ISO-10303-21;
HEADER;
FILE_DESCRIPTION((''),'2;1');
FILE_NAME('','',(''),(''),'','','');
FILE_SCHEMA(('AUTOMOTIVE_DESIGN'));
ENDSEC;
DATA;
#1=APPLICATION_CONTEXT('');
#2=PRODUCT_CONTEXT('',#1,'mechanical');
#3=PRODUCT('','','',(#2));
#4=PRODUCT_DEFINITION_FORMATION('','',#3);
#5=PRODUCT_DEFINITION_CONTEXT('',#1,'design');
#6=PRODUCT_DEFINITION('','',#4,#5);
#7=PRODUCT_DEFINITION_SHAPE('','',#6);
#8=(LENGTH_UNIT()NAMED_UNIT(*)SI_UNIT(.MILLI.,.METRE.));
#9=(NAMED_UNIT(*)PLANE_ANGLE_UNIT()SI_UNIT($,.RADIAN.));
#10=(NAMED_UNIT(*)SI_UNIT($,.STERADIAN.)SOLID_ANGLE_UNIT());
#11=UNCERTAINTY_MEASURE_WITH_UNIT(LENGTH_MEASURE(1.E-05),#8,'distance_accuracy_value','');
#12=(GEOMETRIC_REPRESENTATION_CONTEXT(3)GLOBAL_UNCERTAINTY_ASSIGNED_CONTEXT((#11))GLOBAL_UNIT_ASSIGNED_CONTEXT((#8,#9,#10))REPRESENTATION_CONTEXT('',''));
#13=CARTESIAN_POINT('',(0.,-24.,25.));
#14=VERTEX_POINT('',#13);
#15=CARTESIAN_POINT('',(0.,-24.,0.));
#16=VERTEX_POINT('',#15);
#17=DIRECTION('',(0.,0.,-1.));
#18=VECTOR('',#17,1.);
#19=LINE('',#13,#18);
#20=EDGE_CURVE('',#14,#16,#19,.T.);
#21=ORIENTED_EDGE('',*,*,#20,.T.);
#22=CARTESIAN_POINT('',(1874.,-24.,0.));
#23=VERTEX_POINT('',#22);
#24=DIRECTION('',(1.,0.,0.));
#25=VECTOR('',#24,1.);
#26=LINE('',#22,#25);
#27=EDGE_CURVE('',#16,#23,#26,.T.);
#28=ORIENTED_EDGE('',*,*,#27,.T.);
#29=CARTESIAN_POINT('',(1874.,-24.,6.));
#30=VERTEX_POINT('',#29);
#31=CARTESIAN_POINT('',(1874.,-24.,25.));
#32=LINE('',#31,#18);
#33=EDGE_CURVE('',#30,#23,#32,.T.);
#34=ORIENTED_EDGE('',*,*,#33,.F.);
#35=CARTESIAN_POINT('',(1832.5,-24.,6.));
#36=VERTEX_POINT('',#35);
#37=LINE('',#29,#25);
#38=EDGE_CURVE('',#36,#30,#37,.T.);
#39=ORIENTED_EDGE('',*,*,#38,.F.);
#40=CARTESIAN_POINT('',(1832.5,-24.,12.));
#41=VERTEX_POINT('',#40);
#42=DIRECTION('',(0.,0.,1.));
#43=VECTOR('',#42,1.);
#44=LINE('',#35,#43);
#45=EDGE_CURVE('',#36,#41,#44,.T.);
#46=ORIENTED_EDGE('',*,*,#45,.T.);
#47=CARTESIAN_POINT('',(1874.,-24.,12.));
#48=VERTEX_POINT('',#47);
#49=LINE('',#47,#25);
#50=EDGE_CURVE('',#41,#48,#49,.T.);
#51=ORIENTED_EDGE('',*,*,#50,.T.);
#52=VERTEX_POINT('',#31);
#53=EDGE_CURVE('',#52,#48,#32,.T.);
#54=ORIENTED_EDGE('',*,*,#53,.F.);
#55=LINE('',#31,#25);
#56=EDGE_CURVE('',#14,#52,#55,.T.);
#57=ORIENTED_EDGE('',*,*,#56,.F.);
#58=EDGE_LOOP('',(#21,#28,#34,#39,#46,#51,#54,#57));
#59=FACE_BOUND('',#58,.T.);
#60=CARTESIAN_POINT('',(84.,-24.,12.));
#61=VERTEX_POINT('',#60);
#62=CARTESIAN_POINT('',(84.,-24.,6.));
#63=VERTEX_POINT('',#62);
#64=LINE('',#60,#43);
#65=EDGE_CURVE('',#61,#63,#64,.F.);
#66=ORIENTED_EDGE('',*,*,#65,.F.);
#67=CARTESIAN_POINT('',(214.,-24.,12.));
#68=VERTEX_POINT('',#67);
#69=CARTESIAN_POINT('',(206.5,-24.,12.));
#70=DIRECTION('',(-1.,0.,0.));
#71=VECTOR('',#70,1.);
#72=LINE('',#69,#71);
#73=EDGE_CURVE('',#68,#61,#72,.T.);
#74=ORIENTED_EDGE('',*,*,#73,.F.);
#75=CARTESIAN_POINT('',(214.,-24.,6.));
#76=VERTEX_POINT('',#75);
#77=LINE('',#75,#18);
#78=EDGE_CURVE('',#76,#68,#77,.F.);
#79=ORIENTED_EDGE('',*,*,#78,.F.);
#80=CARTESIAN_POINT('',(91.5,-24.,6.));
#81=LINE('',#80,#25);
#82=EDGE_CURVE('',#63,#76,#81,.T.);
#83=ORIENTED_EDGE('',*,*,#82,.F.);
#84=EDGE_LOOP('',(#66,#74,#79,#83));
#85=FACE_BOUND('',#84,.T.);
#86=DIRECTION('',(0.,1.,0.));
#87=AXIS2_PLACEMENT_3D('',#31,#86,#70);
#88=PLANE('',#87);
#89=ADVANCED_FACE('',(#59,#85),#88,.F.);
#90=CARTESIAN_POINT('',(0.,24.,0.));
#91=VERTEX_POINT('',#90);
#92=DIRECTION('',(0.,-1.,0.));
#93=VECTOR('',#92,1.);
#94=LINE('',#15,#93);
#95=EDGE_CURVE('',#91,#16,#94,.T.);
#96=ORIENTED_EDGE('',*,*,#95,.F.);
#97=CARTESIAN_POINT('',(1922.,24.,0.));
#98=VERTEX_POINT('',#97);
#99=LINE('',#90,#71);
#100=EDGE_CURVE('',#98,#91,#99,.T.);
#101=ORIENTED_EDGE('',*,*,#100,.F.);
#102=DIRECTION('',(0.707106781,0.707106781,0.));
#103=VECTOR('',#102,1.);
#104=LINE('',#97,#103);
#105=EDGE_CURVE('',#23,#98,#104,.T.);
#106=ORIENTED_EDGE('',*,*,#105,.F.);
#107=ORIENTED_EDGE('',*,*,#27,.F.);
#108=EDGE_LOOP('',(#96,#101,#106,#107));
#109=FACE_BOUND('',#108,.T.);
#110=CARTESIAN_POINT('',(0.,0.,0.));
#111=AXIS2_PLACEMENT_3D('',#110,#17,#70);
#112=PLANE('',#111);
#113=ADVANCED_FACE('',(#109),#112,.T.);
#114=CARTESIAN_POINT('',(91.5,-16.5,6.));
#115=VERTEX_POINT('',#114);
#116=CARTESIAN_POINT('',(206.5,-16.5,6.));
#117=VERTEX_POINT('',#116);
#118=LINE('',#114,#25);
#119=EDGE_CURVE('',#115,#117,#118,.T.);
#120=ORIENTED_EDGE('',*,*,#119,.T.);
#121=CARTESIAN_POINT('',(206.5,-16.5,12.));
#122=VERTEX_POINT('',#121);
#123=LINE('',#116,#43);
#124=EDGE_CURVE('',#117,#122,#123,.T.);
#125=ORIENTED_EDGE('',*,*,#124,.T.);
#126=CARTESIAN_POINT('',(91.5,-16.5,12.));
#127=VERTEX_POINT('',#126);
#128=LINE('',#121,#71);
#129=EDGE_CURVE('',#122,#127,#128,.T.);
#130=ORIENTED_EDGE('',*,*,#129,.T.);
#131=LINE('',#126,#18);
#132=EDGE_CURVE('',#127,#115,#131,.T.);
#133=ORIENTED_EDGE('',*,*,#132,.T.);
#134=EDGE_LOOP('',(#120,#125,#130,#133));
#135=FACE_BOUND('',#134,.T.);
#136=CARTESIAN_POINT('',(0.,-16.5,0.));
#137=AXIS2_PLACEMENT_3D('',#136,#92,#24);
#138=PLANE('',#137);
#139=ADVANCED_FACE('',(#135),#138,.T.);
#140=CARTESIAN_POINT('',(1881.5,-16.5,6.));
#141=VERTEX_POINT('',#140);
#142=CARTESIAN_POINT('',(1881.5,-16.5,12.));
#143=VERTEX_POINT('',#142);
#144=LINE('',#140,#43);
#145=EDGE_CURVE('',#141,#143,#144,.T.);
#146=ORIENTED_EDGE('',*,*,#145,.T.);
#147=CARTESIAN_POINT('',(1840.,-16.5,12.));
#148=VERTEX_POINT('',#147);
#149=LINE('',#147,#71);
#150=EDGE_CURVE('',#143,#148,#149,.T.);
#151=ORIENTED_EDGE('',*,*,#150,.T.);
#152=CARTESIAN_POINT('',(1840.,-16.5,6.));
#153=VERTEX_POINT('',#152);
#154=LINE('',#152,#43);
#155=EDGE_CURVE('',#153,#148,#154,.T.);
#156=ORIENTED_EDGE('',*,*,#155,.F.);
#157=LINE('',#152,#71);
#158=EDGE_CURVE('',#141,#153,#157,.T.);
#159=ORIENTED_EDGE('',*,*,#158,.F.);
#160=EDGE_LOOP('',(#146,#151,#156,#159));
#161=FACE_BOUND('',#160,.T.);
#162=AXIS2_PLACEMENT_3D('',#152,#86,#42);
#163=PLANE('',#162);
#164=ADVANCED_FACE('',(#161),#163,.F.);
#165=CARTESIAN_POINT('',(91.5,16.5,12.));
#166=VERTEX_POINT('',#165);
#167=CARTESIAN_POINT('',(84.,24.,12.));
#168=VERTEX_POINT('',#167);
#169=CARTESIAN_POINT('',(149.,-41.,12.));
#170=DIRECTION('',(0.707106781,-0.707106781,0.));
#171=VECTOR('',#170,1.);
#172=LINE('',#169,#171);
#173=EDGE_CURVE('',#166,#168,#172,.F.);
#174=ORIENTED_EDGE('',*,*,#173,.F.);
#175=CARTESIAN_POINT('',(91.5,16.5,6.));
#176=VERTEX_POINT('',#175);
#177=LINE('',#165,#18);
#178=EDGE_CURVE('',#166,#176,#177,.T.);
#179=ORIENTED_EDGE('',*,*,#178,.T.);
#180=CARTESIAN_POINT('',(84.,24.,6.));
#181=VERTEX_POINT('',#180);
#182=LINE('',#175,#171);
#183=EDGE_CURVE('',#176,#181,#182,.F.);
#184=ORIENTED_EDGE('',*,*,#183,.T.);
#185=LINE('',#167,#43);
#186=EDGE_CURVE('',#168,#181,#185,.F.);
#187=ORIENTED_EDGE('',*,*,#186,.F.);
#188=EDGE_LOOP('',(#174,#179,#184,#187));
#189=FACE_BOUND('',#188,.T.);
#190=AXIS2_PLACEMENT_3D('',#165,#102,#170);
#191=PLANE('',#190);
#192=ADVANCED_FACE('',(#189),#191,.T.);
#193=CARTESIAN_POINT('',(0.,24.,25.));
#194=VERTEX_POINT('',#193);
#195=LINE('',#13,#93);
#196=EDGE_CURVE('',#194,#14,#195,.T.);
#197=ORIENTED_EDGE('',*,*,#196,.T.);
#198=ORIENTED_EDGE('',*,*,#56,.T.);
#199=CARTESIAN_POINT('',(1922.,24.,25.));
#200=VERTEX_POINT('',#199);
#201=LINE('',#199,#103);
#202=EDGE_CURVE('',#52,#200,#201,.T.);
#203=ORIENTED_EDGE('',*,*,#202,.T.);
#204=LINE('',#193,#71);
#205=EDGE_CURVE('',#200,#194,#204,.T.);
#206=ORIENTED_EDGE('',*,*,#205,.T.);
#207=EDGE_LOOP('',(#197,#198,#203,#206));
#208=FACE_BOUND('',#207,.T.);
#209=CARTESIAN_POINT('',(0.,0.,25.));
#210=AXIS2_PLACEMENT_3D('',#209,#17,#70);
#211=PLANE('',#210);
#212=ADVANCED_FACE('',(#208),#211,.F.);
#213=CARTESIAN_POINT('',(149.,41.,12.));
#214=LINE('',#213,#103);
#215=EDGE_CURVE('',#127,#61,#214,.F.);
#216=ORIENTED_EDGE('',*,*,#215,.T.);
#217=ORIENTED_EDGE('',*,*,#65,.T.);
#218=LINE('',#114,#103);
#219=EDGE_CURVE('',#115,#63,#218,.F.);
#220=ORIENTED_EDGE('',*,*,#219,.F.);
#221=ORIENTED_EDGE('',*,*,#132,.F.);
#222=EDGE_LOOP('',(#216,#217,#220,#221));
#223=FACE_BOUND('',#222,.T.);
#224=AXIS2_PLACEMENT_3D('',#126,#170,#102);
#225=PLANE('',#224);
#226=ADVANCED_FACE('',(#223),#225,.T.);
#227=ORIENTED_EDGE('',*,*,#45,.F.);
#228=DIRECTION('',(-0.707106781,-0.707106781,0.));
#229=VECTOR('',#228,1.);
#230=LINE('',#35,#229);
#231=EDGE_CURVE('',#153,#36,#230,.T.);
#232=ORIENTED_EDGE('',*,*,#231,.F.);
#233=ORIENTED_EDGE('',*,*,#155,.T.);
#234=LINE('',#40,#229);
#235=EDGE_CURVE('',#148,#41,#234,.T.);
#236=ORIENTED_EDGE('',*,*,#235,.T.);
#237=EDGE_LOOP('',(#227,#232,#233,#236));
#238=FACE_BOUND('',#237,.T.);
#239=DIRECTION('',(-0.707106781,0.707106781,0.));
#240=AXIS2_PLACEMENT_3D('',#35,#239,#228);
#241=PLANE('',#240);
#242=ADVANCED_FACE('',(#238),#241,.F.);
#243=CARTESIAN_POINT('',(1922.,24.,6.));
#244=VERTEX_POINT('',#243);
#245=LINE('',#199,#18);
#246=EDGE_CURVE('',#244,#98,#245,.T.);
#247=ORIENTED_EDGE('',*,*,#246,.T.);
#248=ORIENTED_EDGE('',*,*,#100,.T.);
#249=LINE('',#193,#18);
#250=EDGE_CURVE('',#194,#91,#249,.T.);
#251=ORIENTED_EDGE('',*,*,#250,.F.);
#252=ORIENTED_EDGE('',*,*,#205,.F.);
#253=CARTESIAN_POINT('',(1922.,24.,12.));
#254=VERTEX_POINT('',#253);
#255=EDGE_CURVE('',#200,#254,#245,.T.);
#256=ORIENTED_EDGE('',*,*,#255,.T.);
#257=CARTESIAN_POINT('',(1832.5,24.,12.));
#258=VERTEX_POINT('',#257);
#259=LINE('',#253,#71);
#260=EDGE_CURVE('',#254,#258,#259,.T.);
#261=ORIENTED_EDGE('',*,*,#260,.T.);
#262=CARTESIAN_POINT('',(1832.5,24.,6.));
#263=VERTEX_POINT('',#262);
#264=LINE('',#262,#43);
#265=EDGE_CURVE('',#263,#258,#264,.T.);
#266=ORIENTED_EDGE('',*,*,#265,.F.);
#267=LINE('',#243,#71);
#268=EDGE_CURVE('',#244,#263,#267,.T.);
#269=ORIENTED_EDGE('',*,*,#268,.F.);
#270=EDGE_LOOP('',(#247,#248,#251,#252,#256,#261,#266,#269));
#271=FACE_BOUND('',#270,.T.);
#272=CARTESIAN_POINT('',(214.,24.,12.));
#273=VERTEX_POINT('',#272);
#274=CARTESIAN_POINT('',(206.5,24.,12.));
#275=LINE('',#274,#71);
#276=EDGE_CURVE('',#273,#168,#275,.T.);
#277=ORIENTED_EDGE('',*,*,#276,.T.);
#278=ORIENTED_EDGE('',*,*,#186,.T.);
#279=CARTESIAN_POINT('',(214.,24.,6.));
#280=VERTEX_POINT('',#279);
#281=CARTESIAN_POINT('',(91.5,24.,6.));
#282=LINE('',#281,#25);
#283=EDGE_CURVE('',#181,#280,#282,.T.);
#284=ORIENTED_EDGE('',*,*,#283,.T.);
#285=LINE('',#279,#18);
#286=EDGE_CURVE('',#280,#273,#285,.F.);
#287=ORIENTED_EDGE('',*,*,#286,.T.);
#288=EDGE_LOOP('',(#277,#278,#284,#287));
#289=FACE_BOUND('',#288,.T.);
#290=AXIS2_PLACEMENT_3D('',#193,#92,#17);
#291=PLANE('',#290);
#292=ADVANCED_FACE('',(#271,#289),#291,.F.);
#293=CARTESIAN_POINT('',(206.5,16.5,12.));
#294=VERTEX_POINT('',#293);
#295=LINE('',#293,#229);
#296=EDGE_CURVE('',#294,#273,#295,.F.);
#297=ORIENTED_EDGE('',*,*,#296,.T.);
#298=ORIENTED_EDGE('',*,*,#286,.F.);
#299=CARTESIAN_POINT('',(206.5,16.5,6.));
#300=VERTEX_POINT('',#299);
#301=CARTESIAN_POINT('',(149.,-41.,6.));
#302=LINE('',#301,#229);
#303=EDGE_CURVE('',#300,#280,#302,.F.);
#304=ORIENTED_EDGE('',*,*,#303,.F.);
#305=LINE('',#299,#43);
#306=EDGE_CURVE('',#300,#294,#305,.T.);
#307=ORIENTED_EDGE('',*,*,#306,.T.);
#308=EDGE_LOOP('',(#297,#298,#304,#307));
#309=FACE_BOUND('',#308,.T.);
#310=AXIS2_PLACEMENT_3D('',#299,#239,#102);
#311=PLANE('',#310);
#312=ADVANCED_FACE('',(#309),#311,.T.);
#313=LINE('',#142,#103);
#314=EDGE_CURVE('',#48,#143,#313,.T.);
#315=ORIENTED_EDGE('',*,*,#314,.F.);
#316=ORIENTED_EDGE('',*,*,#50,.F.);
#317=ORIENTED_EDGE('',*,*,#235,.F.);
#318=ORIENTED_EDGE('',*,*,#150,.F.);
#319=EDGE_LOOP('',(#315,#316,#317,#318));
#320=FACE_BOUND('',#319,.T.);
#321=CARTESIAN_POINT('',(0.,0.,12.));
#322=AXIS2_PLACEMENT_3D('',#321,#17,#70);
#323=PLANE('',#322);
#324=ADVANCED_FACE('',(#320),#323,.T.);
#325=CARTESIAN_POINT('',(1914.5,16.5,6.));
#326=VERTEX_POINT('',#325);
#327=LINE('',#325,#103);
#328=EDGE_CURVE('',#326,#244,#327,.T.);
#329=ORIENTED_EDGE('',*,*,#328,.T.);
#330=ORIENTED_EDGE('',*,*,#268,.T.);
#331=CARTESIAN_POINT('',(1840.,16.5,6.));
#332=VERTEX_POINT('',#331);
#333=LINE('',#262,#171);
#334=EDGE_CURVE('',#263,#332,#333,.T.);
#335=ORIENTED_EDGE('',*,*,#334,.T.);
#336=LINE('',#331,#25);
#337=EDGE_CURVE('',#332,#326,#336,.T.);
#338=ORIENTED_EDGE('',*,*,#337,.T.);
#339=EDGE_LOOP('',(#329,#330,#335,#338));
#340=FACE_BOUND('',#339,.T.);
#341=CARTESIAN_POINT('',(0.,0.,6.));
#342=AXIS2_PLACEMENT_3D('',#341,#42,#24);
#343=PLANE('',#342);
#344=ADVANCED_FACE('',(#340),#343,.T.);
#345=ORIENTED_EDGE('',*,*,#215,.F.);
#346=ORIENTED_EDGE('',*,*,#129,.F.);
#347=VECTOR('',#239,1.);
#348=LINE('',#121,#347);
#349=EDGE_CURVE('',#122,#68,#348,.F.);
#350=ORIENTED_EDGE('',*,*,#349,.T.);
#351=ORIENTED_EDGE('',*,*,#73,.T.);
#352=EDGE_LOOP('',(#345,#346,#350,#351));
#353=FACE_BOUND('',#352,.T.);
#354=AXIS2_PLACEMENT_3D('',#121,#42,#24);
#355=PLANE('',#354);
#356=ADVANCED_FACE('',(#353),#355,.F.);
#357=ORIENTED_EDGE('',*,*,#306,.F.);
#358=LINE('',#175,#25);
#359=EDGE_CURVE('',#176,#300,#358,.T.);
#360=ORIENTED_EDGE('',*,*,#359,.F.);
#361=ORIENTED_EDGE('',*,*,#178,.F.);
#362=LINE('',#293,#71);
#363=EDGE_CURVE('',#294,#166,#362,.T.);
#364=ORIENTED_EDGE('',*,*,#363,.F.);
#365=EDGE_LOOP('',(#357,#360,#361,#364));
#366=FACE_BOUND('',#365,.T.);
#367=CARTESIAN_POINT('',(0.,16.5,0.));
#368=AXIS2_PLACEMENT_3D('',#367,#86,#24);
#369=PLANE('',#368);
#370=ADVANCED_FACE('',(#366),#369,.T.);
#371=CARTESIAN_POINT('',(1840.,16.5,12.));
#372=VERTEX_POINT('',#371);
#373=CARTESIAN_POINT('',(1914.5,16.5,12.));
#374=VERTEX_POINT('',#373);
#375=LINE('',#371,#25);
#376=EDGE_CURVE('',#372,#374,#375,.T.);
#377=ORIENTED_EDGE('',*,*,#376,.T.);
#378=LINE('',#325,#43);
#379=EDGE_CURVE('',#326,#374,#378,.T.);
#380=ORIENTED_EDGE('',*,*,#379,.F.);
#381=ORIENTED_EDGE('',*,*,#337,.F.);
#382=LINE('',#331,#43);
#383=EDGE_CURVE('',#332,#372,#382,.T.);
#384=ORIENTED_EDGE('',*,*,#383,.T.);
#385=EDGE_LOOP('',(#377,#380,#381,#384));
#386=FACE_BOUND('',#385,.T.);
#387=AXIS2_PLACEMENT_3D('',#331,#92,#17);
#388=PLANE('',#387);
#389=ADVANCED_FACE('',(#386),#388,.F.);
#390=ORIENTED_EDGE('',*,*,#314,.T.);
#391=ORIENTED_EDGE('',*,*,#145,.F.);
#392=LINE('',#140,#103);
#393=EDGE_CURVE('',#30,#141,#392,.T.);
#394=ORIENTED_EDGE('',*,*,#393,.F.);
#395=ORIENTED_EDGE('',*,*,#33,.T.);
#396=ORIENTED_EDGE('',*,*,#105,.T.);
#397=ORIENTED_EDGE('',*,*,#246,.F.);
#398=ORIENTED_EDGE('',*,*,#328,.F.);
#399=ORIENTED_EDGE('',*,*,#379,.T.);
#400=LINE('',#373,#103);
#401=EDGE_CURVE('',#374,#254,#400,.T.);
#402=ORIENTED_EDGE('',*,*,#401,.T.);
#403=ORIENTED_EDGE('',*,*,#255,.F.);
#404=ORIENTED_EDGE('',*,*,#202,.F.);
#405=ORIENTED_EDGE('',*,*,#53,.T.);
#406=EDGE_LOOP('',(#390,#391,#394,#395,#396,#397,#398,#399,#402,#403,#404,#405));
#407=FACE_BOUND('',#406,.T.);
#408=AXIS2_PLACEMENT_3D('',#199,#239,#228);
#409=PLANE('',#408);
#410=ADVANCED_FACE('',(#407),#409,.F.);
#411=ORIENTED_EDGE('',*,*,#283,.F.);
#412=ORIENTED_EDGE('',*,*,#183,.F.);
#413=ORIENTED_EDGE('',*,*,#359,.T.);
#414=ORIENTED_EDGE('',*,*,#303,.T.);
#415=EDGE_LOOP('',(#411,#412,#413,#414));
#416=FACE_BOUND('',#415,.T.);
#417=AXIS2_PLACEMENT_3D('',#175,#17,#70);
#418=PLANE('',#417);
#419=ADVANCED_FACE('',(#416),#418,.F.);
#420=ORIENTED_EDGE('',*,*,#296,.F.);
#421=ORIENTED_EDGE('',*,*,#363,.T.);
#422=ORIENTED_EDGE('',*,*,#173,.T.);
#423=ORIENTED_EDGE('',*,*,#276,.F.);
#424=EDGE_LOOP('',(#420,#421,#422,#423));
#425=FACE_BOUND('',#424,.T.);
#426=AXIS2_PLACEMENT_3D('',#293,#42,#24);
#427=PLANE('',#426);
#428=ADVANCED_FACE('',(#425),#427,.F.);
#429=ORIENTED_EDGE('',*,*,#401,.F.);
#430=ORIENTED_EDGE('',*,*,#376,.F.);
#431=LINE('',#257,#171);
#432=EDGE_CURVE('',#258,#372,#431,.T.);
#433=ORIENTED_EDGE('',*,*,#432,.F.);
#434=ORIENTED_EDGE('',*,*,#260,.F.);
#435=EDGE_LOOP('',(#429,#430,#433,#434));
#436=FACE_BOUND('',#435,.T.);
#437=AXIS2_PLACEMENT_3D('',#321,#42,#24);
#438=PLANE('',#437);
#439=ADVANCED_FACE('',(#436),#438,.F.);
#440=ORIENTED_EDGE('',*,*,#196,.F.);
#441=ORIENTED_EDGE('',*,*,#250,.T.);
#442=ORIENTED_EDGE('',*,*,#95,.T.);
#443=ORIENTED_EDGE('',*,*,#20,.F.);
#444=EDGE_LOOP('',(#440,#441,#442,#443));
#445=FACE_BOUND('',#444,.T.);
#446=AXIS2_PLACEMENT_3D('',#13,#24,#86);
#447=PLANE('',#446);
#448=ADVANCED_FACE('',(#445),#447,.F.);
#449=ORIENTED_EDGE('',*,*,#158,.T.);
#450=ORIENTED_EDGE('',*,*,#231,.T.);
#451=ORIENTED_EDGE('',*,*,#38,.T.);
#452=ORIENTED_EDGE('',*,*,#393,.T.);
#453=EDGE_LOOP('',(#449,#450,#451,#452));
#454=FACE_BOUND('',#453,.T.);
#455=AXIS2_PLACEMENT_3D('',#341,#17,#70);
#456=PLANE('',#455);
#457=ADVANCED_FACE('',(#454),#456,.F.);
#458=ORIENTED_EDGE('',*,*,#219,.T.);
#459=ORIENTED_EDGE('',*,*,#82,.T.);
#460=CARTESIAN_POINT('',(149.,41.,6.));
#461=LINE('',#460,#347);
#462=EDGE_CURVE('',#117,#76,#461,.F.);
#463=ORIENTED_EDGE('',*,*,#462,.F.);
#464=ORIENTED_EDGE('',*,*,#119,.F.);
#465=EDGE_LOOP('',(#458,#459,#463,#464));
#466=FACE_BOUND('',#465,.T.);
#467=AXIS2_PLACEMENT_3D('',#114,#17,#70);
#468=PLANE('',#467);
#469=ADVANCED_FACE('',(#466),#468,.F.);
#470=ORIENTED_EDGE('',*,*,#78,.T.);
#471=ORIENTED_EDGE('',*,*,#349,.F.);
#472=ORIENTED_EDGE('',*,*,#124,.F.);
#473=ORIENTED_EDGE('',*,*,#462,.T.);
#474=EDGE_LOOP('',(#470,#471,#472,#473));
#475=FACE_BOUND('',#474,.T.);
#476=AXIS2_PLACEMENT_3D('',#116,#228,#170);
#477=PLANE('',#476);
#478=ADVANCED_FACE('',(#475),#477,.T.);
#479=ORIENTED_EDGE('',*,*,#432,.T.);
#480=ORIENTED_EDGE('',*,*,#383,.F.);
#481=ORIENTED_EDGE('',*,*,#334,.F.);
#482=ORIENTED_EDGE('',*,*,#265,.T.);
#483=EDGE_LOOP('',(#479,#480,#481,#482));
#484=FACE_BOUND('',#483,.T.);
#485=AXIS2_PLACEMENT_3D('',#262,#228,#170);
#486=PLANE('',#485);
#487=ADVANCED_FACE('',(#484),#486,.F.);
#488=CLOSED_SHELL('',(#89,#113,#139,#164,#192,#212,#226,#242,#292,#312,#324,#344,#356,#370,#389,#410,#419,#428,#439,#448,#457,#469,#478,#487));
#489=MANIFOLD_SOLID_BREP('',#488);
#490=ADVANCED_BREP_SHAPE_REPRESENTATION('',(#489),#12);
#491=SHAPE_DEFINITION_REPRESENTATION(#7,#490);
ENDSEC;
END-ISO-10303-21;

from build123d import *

# Parameters (mm, degrees)
EXTRUDE_1_DEPTH     = 25
SKETCH_2_W          = 115
SKETCH_2_H          = 6
CUT_EXTRUDE_1_DEPTH = 7.5
DRAFT_1_ANGLE       = 45
MIRROR_START        = 6
MIRROR_1_DEPTH      = 6
CUT_EXTRUDE_START   = -13
CUT_EXTRUDE_2_DEPTH = 6


# Read off the part's stored shape, not the designer's step: 镜向1
with BuildPart() as part:
    # 草图1 → 凸台-拉伸1 (new body)
    with BuildSketch(Plane.XY):
        Polygon((0, 24), (1922, 24), (1874, -24), (0, -24), align=None)
    extrude(amount=EXTRUDE_1_DEPTH)

    # 草图2 → 切除-拉伸1 (cut)
    with BuildSketch(Plane.XZ.offset(24)):
        with Locations((149, 9)):
            Rectangle(SKETCH_2_W, SKETCH_2_H)
    extrude(amount=-CUT_EXTRUDE_1_DEPTH, mode=Mode.SUBTRACT)

    # 拔模1
    draft_1_faces = [part.faces().sort_by_distance(p)[0] for p in [
        (206.5, -20.25, 9),
        (91.5, -20.25, 9),
    ]]
    draft(draft_1_faces, Plane(origin=(0, -16.5, 0), x_dir=(-1, 0, 0), z_dir=(0, -1, 0)), DRAFT_1_ANGLE)

    # 镜向1 outline → 镜向1 (cut)
    with BuildSketch(Plane.XY.offset(MIRROR_START)):
        Polygon((84, 24), (91.5, 16.5), (206.5, 16.5), (214, 24), align=None)
    extrude(amount=MIRROR_1_DEPTH, mode=Mode.SUBTRACT)

    # 草图3 → 切除-拉伸2 (cut)
    with BuildSketch(Plane.XY.offset(25).offset(CUT_EXTRUDE_START)):
        Polygon((1832.5, 24), (1840, 16.5), (1914.5, 16.5), (1922, 24), align=None)
        Polygon((1832.5, -24), (1840, -16.5), (1881.5, -16.5), (1874, -24), align=None)
    extrude(amount=-CUT_EXTRUDE_2_DEPTH, mode=Mode.SUBTRACT)


solid = part.part
